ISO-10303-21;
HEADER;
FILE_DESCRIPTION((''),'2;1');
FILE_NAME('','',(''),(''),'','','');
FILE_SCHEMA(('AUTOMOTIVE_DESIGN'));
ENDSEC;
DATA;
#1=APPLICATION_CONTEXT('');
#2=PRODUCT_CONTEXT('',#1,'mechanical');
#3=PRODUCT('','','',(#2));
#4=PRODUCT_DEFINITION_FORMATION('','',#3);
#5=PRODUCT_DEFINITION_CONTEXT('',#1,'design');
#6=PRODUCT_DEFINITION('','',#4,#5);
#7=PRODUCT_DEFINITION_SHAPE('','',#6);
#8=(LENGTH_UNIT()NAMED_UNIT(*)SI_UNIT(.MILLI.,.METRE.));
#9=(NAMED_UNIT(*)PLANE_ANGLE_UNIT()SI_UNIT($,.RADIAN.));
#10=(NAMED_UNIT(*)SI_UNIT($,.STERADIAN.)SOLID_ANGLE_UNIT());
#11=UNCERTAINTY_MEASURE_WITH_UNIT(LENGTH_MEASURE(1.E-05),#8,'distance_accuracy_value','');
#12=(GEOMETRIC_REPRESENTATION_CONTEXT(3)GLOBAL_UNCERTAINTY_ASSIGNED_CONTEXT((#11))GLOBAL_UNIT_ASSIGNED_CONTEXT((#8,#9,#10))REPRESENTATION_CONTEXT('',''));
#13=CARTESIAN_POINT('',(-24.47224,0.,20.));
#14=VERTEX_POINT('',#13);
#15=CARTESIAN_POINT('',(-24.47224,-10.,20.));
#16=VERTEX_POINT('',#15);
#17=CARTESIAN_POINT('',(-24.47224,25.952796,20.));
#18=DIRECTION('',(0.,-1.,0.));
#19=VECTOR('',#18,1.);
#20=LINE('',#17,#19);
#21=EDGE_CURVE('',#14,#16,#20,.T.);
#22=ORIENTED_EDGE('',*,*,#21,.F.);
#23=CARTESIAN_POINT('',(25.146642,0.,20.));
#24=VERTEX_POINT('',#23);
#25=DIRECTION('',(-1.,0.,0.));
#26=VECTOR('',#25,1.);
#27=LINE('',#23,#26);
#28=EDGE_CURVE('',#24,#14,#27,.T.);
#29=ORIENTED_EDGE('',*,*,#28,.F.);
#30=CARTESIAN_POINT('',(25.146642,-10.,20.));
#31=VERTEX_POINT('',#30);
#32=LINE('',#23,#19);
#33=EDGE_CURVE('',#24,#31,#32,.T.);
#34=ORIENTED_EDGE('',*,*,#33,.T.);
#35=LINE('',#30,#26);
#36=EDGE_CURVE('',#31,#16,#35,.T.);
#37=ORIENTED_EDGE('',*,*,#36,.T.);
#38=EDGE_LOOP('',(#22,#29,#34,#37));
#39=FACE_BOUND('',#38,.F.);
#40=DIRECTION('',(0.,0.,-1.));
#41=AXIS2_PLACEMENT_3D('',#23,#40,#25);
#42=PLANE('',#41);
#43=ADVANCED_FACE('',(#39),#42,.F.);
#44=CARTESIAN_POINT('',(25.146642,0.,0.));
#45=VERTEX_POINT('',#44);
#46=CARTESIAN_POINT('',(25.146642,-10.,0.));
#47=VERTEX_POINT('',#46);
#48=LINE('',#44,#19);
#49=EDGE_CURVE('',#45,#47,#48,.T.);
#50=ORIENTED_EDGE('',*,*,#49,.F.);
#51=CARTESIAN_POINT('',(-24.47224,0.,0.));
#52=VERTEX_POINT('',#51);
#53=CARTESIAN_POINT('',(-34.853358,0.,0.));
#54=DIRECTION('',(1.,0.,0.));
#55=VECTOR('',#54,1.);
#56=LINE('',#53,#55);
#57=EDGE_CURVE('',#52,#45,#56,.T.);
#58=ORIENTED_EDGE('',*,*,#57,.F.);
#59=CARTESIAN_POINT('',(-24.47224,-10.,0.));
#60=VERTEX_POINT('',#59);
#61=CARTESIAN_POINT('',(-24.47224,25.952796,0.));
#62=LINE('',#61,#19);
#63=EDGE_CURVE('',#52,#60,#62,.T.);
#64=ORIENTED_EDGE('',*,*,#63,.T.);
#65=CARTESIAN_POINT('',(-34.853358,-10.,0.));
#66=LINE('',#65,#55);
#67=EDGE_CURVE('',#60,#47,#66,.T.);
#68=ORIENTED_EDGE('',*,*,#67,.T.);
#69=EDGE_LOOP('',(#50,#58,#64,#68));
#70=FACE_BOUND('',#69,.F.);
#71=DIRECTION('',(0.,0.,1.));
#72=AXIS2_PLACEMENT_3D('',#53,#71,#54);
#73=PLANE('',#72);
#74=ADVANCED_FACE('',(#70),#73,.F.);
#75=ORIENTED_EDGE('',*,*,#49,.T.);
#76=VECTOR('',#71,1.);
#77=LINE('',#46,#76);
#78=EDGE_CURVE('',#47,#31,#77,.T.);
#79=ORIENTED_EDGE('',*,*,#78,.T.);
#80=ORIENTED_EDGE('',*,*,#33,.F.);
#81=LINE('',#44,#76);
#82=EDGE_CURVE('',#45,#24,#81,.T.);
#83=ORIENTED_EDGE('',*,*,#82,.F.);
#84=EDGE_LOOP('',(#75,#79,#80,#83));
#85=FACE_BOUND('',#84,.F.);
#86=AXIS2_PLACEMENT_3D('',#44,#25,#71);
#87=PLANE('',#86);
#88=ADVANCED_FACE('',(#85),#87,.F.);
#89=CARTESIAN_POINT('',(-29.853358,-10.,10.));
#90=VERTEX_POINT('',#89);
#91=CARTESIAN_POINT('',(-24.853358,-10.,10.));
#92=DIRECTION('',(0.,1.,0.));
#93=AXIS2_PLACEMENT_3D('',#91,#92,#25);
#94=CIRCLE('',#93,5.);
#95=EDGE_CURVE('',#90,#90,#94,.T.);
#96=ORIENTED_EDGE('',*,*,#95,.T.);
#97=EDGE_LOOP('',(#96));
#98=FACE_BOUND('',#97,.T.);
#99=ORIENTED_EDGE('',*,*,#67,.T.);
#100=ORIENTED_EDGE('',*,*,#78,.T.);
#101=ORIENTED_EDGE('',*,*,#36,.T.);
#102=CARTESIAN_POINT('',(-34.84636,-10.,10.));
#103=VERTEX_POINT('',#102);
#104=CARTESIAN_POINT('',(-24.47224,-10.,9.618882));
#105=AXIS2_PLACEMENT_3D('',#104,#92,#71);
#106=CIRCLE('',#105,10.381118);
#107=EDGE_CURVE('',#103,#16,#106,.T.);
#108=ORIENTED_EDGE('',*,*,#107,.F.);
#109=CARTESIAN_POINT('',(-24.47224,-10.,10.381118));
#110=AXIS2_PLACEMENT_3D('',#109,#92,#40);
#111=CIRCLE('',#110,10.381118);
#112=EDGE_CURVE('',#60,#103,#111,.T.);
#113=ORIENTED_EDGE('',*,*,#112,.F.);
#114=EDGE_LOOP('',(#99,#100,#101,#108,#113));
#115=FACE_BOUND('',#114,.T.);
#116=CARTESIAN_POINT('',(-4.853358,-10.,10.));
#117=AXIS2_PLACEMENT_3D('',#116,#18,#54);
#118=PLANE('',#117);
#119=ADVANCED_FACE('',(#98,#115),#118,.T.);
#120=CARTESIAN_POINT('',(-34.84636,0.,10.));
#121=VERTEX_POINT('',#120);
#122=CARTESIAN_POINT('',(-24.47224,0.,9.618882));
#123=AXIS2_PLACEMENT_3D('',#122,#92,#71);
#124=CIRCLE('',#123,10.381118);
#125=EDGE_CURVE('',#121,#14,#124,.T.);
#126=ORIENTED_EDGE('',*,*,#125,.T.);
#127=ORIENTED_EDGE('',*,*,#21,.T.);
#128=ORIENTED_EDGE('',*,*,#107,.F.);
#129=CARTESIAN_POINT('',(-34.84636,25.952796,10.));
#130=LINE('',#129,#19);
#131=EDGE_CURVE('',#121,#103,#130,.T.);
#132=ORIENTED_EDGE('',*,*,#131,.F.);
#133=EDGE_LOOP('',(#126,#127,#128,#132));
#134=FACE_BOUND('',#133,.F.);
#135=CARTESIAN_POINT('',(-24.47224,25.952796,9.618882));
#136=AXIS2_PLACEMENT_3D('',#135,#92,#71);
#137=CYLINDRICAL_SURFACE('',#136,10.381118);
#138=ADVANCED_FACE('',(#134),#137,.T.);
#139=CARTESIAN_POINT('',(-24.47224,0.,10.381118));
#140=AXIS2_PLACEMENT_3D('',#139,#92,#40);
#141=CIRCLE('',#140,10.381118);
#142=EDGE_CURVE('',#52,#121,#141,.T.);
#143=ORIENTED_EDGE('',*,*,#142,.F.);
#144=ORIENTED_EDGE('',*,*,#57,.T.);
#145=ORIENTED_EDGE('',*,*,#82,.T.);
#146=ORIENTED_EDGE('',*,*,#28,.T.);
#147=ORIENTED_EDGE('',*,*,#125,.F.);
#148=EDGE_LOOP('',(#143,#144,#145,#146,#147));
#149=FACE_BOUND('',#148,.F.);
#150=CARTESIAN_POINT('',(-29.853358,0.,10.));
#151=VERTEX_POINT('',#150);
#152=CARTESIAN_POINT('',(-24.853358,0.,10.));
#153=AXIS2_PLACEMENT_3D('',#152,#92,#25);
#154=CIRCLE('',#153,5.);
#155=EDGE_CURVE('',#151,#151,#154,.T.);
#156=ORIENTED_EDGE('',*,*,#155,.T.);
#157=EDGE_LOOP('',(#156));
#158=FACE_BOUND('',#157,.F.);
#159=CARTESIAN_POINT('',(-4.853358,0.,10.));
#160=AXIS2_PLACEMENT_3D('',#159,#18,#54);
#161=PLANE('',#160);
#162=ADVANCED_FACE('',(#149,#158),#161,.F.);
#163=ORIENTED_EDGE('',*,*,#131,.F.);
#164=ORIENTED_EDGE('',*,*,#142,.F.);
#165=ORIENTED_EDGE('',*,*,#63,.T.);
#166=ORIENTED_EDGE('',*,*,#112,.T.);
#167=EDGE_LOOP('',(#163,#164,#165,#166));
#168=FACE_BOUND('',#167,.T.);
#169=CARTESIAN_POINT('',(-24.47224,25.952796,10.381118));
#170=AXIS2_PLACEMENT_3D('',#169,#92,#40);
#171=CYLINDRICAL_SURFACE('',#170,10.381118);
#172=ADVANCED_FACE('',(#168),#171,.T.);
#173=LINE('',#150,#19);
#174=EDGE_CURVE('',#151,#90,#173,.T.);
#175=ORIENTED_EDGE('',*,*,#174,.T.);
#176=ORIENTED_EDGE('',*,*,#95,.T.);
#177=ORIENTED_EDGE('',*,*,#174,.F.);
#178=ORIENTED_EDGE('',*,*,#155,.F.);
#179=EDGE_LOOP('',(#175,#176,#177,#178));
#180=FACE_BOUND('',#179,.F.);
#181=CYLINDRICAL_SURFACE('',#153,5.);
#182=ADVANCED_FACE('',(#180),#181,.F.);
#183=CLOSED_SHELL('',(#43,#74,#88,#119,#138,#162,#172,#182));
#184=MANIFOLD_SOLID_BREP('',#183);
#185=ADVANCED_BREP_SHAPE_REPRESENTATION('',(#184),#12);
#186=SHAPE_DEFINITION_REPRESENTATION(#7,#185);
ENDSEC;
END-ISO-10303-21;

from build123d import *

# Parameters (mm, degrees)
F1_DEPTH    = 10
F2_T1_DEPTH = 61.905591591


# Not quite as in the source:
# - a fillet or chamfer that OpenCascade refuses, or shapes differently, is made with other operations: its cross-section is extruded or revolved along the edge and cut away or added


with BuildPart() as f1:
    # F0 (on Front) → F1 (new body)
    with BuildSketch(Plane.XZ):
        Polygon((-34.8533578217, 10), (-34.8533578217, 0), (25.1466421783, 0), (25.1466421783, 20), (-34.8533578217, 20), align=None)
        with BuildLine():
            ThreePointArc((-19.8533578217, 10), (-24.8533578217, 5), (-29.8533578217, 10))
            ThreePointArc((-29.8533578217, 10), (-24.8533578217, 15), (-19.8533578217, 10))
        make_face(mode=Mode.SUBTRACT)
    extrude(amount=F1_DEPTH)

    # F2: fillet of radius 10.3811183182 on 2 edges, made by hand

    # F2_s2 → F2_t1 (cut)
    with BuildSketch(Plane.XZ.offset(-25.9527957955)):
        with BuildLine():
            ThreePointArc((-24.4722395035, 20), (-31.8127986626, 16.9594408409), (-34.8533578217, 9.6188816818))
            Line((-34.8533578217, 9.6188816818), (-34.8533578217, 20))
            Line((-34.8533578217, 20), (-24.4722395035, 20))
        make_face()
        with BuildLine():
            ThreePointArc((-24.4722395035, 0), (-31.8127986626, 3.0405591591), (-34.8533578217, 10.3811183182))
            Line((-34.8533578217, 10.3811183182), (-34.8533578217, 0))
            Line((-34.8533578217, 0), (-24.4722395035, 0))
        make_face()
    extrude(amount=F2_T1_DEPTH, mode=Mode.SUBTRACT)


solid = f1.part
